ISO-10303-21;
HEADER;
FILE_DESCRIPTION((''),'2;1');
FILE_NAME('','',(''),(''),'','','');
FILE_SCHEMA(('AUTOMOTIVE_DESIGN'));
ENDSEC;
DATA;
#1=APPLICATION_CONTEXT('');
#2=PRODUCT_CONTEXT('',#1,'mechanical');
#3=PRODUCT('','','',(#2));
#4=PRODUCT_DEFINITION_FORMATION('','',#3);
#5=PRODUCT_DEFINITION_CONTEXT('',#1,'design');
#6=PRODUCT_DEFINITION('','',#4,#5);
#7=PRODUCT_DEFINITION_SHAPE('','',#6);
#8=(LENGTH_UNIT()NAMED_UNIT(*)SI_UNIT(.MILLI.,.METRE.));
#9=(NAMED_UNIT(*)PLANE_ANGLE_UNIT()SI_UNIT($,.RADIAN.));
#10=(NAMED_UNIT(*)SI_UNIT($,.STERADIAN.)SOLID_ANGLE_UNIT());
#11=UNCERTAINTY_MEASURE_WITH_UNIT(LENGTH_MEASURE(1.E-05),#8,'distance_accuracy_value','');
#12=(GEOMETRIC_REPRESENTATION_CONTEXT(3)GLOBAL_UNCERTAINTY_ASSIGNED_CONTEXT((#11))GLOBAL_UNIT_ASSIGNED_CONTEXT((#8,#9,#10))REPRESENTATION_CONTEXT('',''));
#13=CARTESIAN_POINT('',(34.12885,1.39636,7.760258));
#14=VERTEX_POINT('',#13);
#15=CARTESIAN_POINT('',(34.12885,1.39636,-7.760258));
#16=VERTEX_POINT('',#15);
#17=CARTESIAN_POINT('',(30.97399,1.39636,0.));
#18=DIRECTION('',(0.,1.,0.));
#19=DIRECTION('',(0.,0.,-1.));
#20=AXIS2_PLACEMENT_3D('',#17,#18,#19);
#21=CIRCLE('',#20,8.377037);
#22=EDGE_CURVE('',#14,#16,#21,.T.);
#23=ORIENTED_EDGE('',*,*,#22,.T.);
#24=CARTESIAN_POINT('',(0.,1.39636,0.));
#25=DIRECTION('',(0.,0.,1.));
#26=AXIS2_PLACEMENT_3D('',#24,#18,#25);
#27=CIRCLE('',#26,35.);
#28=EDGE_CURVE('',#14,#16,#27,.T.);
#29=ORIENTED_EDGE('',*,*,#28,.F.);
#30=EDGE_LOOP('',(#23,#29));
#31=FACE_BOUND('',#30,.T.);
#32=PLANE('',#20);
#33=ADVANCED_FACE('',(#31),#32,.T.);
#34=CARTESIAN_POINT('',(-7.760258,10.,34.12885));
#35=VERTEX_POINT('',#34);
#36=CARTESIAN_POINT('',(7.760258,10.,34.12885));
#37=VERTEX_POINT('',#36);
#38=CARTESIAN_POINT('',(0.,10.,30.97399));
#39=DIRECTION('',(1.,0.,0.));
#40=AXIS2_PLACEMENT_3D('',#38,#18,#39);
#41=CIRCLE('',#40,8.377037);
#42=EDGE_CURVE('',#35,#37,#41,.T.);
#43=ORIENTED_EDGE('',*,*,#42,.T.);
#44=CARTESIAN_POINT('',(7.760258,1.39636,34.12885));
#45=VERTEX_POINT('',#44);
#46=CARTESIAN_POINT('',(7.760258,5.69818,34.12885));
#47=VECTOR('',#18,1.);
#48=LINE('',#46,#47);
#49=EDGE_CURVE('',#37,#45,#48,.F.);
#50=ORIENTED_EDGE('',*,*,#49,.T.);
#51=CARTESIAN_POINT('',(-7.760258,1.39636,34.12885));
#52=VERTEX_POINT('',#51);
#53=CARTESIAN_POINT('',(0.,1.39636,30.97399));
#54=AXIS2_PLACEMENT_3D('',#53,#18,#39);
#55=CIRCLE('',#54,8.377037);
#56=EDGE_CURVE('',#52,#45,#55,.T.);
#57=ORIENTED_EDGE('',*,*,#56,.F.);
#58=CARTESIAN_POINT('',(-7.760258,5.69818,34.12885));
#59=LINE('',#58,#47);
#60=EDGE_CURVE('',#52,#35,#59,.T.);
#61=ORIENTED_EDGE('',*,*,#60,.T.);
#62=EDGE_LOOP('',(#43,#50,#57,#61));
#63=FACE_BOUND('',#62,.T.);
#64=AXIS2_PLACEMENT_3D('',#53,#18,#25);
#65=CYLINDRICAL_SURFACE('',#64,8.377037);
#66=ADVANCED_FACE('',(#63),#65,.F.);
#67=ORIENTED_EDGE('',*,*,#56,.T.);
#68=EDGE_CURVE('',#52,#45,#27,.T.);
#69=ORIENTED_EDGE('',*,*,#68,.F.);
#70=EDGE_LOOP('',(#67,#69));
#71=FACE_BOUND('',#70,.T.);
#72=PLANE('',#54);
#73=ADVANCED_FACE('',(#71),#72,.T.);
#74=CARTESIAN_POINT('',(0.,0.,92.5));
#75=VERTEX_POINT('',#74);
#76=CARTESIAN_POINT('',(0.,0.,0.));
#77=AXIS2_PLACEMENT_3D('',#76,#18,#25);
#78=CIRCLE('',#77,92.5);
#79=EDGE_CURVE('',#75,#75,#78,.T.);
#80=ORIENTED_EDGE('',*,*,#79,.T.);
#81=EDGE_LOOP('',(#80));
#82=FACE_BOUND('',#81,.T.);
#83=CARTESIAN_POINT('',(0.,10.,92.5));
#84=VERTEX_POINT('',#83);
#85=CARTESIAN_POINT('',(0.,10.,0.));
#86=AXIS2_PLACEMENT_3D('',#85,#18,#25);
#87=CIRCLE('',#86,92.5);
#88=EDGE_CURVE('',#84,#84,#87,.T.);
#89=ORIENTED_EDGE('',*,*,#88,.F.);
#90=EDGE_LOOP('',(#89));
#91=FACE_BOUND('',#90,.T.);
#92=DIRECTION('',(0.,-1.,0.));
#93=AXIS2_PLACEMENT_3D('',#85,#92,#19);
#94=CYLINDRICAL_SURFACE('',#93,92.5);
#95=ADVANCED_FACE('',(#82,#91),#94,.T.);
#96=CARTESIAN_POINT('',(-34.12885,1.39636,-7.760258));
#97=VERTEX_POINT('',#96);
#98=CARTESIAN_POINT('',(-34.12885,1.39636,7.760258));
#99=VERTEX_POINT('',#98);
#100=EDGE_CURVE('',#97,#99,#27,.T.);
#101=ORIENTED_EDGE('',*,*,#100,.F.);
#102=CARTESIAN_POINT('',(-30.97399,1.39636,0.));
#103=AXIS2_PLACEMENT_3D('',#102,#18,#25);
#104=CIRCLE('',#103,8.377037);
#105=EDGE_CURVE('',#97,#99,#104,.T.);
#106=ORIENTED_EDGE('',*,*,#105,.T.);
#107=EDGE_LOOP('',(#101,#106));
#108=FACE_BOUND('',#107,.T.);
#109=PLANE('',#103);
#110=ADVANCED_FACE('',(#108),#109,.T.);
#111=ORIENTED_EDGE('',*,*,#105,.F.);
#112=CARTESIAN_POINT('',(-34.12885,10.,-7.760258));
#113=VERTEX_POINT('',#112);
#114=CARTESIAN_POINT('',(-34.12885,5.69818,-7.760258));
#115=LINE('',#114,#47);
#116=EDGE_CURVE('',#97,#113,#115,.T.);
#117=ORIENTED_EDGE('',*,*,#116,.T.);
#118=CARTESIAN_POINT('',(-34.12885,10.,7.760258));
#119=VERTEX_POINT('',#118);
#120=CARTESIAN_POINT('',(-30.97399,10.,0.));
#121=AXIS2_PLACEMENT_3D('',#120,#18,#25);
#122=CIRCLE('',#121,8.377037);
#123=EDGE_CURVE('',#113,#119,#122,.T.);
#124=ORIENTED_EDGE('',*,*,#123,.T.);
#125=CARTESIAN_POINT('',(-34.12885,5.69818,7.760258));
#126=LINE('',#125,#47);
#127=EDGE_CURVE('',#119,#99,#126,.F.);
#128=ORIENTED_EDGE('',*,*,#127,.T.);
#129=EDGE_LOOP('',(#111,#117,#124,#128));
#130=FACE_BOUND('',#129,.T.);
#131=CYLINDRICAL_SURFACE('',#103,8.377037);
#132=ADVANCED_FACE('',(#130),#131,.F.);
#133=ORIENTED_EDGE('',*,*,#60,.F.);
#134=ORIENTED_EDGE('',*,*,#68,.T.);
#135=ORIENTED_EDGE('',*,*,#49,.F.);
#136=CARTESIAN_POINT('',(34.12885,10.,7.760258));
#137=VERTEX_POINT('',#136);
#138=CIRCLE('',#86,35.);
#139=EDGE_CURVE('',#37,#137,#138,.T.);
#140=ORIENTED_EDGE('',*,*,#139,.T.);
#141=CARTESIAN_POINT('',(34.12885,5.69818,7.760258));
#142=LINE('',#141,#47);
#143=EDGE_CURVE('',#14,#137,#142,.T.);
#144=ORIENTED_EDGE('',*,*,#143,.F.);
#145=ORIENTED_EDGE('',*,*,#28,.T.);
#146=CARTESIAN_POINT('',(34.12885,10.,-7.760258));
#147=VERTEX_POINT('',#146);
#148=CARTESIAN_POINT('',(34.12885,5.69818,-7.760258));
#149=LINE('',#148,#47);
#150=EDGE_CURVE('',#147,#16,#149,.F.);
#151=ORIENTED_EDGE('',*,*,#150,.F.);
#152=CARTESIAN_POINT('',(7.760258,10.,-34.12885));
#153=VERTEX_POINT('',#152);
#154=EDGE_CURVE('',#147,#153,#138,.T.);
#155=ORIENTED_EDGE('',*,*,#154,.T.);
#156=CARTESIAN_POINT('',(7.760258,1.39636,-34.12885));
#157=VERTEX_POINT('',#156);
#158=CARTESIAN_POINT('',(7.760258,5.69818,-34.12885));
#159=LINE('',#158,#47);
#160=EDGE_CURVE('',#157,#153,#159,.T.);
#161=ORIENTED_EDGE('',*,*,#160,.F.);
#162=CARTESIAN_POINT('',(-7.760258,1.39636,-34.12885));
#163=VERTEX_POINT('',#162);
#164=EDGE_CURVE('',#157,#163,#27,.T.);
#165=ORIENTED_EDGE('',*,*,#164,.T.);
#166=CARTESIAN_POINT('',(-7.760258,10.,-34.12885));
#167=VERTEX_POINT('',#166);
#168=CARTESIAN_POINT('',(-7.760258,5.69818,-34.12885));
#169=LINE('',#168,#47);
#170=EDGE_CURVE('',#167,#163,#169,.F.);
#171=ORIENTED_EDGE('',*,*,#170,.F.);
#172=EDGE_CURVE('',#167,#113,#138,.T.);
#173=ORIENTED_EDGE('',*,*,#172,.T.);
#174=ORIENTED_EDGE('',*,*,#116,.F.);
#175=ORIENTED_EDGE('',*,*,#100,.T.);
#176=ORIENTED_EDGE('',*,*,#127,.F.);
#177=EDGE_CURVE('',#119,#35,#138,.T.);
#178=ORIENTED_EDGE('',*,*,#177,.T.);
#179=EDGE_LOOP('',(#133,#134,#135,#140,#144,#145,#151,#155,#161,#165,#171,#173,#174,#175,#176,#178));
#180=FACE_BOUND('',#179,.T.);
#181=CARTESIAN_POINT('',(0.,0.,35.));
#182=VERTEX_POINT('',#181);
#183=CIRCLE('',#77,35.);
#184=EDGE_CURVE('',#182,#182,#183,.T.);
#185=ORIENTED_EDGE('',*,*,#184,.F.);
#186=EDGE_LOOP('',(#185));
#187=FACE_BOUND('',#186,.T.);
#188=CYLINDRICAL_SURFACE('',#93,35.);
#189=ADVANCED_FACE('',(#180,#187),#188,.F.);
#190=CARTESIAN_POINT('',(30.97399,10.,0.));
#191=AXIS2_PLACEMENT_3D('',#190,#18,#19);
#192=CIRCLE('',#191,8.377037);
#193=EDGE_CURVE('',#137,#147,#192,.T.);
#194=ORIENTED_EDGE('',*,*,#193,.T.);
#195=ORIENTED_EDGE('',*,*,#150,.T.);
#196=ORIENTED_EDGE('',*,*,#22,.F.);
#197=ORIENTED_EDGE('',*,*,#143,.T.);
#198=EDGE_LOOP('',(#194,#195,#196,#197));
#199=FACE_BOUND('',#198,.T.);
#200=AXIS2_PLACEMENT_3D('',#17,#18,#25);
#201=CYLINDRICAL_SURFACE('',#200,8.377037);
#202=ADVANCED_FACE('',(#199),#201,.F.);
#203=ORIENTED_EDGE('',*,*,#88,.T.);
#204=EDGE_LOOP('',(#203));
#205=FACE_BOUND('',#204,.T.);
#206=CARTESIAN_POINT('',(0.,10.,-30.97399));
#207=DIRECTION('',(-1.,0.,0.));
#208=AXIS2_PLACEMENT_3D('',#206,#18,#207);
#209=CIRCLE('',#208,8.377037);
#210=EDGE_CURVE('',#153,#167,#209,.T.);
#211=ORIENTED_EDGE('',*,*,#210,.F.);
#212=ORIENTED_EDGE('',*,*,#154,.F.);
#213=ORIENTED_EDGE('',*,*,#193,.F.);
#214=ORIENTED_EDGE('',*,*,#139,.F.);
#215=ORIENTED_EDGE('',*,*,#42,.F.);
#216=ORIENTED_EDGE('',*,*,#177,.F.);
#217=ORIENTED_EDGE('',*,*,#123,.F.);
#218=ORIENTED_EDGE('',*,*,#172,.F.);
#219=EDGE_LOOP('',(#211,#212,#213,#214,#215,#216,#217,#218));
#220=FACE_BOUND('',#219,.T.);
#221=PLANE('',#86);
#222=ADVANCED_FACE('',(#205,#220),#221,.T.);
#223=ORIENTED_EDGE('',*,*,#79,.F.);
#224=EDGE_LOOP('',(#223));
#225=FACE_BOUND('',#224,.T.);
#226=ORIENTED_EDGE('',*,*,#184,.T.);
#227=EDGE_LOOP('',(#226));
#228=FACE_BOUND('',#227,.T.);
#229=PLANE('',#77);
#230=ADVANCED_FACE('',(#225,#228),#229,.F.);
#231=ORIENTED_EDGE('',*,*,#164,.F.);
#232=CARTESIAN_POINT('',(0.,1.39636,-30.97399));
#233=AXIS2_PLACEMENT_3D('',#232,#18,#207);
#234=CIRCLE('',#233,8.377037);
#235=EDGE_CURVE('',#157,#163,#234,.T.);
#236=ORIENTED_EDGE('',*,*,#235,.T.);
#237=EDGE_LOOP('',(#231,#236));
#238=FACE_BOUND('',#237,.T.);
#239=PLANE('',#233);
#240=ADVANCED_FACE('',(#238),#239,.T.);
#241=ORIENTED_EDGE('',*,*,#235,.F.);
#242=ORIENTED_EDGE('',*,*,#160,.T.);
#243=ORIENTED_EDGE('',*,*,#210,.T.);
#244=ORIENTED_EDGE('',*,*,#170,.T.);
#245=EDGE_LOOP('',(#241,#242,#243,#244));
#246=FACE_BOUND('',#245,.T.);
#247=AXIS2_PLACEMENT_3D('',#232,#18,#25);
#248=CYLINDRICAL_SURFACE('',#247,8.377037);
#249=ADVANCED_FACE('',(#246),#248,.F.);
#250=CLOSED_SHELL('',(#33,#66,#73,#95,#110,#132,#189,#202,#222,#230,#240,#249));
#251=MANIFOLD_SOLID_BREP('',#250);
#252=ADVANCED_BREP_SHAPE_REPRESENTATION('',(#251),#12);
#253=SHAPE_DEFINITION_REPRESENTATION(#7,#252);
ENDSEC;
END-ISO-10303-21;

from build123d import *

# Parameters (mm, degrees)
SKETCH1_R           = 92.5
BOSS_EXTRUDE1_DEPTH = 10
SKETCH2_R           = 35
CUT_EXTRUDE1_DEPTH  = 132.196417634
SKETCH3_R           = 8.377036791
CUT_EXTRUDE2_DEPTH  = 8.603639824
CIRPATTERN1_COUNT   = 4


with BuildPart() as part:
    # Sketch1 → Boss-Extrude1 (new body)
    with BuildSketch(Plane(origin=(0, 0, 0), x_dir=(1, 0, 0), z_dir=(0, 1, 0))):
        Circle(SKETCH1_R)
    extrude(amount=BOSS_EXTRUDE1_DEPTH)

    # Sketch2 → Cut-Extrude1 (cut, through all)
    with BuildSketch(Plane(origin=(0, 0, 0), x_dir=(1, 0, 0), z_dir=(0, 1, 0))):
        Circle(SKETCH2_R)
    extrude(amount=CUT_EXTRUDE1_DEPTH, mode=Mode.SUBTRACT)

    # Sketch3 → Cut-Extrude2 (cut)
    with BuildSketch(Plane(origin=(0, 10, 0), x_dir=(1, 0, 0), z_dir=(0, 1, 0))):
        with Locations((-30.973990146, 0)):
            Circle(SKETCH3_R)
    cut_extrude2 = extrude(amount=-CUT_EXTRUDE2_DEPTH, mode=Mode.SUBTRACT)

    # CirPattern1: Cut-Extrude2 ×4 about axis
    cirpattern1_axis = Axis((0, 0, 0), (0, 1, 0))
    for i in range(1, CIRPATTERN1_COUNT):
        add(cut_extrude2.rotate(cirpattern1_axis, i * 360 / CIRPATTERN1_COUNT), mode=Mode.SUBTRACT)


solid = part.part
